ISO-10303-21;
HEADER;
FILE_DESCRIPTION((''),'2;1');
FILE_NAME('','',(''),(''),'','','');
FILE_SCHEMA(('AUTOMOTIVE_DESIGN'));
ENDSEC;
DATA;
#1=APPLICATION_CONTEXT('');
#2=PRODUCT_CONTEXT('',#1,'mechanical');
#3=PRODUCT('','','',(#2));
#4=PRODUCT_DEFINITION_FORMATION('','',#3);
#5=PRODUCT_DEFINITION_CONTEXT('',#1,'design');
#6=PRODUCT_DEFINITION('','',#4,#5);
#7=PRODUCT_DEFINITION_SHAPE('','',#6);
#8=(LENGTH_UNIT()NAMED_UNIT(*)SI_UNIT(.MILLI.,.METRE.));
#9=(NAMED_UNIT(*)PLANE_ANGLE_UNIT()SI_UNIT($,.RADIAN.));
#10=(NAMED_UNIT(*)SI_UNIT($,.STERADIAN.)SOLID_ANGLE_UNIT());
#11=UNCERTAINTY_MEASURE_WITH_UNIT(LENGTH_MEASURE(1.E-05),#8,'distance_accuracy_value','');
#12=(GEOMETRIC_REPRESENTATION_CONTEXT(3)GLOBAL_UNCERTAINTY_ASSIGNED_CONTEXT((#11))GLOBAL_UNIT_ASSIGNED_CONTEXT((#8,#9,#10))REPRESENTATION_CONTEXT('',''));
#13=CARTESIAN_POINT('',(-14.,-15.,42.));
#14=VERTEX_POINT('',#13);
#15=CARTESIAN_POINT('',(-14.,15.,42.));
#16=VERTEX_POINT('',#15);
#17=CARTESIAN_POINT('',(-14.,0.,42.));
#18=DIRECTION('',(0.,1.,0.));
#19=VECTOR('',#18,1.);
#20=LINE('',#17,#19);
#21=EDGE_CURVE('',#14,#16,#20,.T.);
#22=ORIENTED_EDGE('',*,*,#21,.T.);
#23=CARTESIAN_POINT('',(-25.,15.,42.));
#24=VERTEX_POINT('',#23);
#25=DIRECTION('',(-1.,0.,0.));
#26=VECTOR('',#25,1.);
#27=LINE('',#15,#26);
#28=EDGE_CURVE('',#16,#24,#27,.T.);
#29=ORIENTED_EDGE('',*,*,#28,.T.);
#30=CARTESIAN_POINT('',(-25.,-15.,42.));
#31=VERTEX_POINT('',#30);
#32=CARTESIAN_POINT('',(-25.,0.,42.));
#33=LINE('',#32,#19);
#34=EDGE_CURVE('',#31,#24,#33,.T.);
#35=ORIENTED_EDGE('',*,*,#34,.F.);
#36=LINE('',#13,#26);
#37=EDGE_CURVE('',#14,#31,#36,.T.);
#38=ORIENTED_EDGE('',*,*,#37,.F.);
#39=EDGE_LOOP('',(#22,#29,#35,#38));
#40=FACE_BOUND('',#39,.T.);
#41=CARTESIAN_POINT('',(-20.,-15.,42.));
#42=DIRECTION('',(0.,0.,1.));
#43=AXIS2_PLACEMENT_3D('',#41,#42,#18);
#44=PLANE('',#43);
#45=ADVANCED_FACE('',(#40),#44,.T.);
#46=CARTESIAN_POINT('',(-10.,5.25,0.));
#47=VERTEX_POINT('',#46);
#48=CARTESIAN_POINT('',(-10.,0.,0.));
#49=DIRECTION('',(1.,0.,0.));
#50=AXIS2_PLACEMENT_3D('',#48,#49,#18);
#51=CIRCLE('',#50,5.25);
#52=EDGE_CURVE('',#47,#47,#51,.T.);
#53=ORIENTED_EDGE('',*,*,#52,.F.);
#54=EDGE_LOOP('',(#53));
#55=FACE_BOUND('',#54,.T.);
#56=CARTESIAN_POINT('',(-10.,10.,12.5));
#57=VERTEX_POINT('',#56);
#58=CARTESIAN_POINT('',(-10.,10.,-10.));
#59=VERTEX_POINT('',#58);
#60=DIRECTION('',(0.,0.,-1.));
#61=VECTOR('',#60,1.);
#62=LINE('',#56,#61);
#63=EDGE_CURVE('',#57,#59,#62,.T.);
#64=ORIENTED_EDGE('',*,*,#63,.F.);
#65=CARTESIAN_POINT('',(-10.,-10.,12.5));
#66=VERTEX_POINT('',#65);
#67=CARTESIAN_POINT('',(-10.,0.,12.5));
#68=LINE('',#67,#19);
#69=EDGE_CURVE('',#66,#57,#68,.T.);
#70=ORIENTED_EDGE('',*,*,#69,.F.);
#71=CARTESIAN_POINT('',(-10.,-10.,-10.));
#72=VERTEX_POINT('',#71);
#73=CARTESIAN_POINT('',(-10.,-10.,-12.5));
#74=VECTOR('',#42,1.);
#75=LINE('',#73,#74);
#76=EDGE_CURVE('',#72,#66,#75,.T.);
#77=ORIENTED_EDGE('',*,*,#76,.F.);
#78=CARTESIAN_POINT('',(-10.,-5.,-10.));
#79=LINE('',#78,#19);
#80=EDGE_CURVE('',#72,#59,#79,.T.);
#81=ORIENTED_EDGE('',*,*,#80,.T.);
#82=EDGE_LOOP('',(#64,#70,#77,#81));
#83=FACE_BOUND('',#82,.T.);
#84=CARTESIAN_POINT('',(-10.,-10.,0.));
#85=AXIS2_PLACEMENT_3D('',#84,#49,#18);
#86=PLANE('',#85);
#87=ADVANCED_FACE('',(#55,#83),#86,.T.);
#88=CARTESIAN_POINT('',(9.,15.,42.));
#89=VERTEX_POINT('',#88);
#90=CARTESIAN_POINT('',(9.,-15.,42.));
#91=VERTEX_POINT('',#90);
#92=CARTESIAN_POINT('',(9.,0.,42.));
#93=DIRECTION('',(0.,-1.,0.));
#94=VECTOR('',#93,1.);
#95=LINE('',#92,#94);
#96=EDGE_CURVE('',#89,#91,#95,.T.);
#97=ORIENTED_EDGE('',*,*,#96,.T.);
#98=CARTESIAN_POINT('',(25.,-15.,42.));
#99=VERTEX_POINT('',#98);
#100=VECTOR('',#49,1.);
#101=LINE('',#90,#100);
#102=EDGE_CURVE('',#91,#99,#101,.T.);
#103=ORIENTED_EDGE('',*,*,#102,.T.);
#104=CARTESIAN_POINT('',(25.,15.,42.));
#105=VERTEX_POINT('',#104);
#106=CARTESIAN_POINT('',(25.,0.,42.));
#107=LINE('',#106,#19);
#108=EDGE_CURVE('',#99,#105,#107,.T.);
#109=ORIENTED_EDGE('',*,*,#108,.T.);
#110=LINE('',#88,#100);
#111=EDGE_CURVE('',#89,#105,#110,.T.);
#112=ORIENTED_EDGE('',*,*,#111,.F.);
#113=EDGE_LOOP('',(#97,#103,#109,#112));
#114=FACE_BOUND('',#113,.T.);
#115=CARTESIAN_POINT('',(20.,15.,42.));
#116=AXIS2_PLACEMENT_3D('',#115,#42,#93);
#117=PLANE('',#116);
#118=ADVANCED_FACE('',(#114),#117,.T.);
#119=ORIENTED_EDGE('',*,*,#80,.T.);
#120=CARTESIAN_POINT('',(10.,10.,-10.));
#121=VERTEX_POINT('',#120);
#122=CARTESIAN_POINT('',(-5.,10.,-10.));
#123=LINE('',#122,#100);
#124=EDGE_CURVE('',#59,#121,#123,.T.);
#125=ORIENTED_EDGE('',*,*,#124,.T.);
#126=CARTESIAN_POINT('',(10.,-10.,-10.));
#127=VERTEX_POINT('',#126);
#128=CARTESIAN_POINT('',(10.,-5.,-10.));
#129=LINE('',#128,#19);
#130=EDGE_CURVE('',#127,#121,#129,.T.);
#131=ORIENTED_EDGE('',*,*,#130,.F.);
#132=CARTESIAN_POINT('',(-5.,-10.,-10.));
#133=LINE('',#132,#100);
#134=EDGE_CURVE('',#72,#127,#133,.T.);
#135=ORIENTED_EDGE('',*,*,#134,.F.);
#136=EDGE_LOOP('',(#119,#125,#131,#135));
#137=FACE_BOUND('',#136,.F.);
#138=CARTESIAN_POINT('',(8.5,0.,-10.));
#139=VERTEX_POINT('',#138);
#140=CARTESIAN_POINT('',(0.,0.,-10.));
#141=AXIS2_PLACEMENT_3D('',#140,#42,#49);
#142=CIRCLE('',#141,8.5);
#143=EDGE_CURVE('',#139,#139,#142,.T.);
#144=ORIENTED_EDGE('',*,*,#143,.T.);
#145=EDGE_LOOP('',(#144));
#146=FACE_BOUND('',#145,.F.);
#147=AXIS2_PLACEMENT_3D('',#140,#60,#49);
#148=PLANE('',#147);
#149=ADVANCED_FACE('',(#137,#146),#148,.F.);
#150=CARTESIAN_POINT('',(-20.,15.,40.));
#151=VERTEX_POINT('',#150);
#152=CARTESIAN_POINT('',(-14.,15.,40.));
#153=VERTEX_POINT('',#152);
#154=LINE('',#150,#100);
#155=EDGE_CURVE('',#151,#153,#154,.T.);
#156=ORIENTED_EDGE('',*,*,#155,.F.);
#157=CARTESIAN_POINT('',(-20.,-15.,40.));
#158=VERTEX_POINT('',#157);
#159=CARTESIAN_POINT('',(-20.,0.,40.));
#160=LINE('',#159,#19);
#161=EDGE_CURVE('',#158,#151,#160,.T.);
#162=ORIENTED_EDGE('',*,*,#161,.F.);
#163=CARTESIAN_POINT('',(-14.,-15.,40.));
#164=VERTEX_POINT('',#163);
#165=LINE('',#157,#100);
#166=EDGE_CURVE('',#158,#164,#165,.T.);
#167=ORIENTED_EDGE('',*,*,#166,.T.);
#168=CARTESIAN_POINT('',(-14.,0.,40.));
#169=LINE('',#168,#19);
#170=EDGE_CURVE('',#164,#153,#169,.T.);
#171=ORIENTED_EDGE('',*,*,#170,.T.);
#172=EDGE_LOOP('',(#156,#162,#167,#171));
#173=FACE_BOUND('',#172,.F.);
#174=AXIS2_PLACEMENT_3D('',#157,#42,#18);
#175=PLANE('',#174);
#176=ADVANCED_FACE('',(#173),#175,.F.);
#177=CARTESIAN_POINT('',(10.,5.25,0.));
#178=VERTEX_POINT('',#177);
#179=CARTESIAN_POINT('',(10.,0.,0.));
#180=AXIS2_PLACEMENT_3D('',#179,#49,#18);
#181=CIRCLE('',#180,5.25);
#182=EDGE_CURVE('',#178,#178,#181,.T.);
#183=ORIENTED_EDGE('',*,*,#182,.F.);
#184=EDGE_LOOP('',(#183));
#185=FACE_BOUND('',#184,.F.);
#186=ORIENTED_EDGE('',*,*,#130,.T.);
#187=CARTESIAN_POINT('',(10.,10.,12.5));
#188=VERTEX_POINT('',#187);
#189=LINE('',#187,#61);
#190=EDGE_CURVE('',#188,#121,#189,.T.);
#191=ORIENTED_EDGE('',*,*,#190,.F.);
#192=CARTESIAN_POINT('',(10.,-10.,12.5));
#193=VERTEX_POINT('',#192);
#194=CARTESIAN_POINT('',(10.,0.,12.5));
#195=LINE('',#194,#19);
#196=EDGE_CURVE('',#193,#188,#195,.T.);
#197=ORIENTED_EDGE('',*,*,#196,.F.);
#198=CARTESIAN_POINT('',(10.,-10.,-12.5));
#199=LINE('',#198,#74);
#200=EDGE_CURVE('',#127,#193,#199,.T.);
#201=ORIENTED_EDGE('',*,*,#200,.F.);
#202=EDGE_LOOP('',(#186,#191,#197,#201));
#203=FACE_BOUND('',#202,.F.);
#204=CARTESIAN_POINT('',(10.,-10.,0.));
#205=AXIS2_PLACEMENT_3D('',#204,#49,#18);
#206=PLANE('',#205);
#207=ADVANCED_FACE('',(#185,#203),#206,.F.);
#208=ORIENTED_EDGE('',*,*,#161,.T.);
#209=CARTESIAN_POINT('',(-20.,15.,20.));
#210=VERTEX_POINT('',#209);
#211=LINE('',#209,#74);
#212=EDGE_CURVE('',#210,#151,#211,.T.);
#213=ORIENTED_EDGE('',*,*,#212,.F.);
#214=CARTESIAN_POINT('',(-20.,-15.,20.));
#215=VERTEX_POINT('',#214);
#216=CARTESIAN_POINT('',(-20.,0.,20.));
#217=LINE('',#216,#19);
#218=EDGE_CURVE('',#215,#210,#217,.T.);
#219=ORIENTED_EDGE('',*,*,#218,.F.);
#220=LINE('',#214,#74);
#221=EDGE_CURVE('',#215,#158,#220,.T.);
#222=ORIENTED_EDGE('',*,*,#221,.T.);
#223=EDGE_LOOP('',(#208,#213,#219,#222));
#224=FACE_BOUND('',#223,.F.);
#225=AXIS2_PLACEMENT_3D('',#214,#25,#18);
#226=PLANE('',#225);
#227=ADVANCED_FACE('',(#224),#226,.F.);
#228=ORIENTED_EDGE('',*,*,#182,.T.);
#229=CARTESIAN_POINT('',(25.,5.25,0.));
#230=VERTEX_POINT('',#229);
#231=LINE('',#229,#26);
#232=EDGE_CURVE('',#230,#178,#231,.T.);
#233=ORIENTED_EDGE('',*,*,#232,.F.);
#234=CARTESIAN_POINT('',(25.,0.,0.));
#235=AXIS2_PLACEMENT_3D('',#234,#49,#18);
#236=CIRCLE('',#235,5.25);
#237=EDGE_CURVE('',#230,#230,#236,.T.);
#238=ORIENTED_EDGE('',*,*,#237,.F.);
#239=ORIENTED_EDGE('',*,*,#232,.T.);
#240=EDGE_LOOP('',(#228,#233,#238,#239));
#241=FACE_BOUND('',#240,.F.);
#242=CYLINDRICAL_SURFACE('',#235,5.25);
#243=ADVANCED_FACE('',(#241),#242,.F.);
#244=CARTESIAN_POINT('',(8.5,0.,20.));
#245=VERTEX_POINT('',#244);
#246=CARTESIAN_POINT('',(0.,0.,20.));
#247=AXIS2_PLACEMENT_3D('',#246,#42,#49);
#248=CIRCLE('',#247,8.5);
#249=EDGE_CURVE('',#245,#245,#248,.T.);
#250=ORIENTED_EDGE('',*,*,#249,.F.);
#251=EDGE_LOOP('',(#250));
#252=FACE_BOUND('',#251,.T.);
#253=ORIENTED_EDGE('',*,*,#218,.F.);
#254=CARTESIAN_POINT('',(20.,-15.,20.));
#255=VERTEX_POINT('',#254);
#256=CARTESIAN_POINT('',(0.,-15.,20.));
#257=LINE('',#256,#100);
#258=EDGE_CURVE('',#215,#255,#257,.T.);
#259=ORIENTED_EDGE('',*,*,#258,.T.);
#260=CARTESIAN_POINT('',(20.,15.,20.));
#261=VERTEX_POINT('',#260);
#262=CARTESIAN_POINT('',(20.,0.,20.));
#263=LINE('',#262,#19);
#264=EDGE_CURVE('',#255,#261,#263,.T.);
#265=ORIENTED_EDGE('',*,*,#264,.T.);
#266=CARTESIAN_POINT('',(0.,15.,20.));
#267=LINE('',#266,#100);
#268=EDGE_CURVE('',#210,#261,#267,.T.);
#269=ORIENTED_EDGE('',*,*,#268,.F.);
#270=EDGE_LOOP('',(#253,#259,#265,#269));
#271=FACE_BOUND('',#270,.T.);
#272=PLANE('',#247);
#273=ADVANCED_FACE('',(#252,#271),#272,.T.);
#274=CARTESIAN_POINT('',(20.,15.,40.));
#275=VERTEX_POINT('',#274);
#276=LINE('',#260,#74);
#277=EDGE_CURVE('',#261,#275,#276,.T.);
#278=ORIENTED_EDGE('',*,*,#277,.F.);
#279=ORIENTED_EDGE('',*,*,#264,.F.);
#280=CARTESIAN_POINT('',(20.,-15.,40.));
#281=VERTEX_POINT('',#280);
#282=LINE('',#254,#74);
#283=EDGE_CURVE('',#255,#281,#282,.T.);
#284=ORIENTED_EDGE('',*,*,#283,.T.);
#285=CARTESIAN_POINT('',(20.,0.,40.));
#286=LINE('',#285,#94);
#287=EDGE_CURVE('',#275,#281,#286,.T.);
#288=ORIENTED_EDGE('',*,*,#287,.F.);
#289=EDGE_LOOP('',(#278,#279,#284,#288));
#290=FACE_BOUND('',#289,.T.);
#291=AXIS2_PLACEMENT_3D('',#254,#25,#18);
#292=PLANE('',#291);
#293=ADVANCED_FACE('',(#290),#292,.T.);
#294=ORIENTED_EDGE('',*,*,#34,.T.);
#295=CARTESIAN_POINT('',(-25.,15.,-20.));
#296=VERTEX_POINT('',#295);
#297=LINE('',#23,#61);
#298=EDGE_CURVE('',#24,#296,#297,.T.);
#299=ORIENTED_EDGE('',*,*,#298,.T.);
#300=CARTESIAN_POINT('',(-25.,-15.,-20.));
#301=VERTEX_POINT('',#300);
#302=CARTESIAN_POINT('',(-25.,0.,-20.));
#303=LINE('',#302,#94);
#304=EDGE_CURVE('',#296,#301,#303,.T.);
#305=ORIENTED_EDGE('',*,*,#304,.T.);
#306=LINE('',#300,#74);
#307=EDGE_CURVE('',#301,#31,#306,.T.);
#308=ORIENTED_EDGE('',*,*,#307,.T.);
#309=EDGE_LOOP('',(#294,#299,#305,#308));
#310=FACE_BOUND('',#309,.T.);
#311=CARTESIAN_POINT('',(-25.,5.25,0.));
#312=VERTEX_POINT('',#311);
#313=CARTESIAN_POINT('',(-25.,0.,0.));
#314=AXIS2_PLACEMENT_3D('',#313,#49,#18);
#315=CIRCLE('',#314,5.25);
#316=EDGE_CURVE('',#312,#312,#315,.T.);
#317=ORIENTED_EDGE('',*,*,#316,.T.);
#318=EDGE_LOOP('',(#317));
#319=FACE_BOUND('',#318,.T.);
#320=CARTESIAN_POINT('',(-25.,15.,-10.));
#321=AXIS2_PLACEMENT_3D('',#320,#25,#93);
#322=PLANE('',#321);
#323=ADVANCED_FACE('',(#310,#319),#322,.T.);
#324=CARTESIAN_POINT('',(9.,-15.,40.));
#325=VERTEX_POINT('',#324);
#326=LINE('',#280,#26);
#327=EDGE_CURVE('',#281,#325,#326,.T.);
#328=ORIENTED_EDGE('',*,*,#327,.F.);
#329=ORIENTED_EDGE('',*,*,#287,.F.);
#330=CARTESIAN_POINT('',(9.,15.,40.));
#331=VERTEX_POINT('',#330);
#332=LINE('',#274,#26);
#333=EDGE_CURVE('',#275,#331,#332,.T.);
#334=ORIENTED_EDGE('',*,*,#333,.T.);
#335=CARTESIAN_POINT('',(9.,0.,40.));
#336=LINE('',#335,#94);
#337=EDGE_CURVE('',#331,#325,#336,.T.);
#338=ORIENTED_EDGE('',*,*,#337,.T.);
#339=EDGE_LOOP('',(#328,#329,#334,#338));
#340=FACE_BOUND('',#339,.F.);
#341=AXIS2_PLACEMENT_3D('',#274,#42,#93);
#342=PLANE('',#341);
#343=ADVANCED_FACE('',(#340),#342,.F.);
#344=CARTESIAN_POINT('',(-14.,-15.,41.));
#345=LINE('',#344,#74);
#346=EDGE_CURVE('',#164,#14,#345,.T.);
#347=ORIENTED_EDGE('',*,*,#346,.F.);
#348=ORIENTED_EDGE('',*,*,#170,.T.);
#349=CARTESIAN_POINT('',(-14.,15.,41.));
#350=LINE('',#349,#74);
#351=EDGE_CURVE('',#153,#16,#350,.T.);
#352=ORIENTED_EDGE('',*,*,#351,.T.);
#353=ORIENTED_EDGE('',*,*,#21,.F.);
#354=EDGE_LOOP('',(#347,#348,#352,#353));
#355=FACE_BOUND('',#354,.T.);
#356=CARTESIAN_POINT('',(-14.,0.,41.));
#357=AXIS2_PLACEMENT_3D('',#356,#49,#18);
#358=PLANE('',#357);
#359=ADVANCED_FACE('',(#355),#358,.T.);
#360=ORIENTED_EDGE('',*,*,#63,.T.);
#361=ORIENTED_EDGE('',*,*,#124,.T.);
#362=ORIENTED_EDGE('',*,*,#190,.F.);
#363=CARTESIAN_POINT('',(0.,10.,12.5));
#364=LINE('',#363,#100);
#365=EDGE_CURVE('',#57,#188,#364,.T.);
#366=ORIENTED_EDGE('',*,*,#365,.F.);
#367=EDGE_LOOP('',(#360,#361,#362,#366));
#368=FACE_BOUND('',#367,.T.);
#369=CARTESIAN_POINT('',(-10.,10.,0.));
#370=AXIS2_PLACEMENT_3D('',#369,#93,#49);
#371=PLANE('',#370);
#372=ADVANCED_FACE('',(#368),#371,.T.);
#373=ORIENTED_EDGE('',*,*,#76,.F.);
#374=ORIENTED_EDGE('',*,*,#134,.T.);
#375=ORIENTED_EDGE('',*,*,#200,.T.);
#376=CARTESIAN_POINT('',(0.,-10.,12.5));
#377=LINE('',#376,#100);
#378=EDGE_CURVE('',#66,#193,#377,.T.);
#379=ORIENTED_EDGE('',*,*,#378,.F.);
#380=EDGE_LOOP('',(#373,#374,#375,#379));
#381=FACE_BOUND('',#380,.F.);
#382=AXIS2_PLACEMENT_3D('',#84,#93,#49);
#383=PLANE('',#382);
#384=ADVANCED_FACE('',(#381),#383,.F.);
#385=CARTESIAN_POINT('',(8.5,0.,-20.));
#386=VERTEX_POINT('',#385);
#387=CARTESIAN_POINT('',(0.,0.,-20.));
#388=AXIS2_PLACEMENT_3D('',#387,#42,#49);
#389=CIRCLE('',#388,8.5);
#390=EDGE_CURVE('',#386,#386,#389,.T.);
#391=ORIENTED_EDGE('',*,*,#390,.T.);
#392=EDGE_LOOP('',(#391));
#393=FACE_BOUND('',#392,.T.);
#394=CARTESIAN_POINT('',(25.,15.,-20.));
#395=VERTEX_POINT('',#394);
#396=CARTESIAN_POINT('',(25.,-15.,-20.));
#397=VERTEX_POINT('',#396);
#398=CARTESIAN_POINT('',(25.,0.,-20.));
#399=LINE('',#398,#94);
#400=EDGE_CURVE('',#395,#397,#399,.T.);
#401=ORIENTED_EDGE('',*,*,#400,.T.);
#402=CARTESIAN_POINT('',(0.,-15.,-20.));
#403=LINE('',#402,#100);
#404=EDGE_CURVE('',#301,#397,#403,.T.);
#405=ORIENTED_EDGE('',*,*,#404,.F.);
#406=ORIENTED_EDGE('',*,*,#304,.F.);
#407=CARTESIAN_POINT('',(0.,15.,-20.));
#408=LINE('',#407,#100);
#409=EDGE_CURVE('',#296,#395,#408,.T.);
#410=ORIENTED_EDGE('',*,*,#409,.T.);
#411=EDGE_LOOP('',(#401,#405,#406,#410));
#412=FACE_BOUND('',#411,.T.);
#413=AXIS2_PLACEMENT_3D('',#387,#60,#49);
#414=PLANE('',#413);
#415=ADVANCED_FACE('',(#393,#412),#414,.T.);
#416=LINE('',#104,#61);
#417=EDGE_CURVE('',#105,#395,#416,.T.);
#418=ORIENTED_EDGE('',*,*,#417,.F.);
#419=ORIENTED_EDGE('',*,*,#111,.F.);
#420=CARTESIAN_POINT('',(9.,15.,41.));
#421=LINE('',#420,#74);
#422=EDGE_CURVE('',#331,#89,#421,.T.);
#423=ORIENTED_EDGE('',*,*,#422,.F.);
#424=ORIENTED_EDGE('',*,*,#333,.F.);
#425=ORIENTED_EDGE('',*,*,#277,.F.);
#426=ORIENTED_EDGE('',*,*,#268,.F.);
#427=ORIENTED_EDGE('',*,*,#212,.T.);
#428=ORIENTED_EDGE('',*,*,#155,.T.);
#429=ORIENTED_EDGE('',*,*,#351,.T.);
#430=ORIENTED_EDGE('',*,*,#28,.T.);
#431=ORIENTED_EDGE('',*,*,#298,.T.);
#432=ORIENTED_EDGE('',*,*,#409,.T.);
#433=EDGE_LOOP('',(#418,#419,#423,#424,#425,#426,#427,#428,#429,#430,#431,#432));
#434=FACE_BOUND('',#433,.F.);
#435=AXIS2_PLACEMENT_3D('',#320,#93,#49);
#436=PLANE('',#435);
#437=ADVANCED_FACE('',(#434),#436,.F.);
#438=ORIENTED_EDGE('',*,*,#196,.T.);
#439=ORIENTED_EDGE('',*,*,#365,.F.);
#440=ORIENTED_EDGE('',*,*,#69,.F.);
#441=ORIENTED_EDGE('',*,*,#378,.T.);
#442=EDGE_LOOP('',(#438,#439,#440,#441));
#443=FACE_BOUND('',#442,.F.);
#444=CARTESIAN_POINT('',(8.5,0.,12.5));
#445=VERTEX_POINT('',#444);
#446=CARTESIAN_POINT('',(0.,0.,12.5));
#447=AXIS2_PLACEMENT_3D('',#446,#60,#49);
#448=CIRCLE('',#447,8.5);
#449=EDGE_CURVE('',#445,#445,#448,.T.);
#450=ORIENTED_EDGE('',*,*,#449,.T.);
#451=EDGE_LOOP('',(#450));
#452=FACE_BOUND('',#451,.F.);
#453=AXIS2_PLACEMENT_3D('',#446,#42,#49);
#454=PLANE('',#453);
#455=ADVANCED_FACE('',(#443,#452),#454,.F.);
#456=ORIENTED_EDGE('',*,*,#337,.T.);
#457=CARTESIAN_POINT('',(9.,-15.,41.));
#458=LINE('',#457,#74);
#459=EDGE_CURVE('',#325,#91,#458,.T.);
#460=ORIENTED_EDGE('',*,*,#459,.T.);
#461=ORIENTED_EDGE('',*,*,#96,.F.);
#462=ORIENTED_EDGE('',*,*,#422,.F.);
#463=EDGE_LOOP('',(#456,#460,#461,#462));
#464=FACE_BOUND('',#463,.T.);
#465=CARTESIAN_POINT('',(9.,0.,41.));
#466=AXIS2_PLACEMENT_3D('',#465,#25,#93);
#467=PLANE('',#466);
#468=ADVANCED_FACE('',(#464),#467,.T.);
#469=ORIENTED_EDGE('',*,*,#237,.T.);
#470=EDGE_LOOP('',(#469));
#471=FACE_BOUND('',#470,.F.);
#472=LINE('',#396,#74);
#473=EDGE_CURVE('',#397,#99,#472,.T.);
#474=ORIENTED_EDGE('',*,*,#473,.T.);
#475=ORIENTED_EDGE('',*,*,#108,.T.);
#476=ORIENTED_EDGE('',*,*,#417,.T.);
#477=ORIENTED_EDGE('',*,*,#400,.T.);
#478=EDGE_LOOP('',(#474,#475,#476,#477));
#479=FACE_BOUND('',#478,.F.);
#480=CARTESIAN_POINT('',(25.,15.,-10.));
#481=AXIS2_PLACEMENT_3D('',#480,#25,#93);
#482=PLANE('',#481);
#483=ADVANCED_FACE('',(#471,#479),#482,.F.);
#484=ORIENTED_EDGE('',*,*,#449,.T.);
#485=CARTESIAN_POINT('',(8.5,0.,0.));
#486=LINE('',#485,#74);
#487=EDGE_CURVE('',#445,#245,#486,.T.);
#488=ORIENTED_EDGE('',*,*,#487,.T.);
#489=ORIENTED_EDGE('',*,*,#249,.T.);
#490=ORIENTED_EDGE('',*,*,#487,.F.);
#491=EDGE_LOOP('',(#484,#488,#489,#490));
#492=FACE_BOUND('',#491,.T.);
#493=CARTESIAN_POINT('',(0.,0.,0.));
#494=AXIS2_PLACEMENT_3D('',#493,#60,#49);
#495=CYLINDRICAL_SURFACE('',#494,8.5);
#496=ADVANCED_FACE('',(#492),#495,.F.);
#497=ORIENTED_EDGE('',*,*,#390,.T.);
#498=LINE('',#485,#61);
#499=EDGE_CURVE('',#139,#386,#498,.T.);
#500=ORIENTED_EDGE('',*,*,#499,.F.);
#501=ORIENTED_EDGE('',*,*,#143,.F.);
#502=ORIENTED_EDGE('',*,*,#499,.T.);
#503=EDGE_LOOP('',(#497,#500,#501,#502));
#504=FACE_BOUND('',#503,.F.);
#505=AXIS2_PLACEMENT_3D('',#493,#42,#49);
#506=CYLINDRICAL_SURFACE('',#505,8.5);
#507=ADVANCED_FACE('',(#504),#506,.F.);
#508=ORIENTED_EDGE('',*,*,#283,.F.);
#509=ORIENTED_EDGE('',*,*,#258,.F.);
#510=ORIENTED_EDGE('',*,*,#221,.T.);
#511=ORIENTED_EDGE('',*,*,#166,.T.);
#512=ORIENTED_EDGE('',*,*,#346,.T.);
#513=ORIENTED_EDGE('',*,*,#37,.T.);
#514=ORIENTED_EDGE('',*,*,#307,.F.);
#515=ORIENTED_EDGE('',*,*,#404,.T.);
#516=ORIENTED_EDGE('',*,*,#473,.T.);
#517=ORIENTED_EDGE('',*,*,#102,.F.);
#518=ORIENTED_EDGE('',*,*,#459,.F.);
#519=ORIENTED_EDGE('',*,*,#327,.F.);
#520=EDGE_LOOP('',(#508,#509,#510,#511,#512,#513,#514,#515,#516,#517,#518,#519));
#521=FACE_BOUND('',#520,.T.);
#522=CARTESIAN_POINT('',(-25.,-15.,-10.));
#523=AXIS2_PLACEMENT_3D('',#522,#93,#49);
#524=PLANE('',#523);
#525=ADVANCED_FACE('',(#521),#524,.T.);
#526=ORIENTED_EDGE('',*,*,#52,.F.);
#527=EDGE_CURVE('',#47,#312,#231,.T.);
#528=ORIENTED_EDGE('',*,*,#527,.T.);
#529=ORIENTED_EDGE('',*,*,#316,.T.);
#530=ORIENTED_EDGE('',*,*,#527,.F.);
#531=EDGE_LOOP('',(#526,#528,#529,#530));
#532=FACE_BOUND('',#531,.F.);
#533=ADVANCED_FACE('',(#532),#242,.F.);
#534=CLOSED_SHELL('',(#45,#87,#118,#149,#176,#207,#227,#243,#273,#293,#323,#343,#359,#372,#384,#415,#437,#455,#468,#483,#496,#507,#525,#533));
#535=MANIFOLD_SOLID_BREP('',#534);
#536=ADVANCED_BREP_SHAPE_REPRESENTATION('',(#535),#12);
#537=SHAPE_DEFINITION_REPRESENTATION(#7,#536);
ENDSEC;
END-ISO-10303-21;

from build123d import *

# Parameters (mm, degrees)
F2_W      = 50
F2_H      = 30
F3_DEPTH  = 30
F0_R      = 8.5
F4_DEPTH  = 20
F5_W      = 5
F5_H      = 30
F6_DEPTH  = 22
F7_W      = 30
F7_H      = 2
F8_DEPTH  = 6
F9_W      = 30
F9_H      = 2
F10_DEPTH = 11
F11_W     = 20
F11_H     = 20
F12_DEPTH = 12.5
F13_W     = 50
F13_H     = 30
F14_DEPTH = 10
F15_DEPTH = 25
F16_R     = 5.25
F17_DEPTH = 50


with BuildPart() as f3:
    # F2 (on offset) → F3 (new body)
    with BuildSketch(Plane.XY.offset(20)):
        Rectangle(F2_W, F2_H)
    extrude(amount=-F3_DEPTH)

    # F0 (on Top) → F4 (cut)
    with BuildSketch(Plane.XY):
        Circle(F0_R)
    extrude(amount=F4_DEPTH, mode=Mode.SUBTRACT)

    # F5 (on face) → F6 (join)
    with BuildSketch(Plane.XY.offset(20)):
        with Locations((-22.5, 0)):
            Rectangle(F5_W, F5_H)
        with Locations((22.5, 0)):
            Rectangle(F5_W, F5_H)
    extrude(amount=F6_DEPTH)

    # F7 (on face) → F8 (join)
    with BuildSketch(Plane.YZ.offset(-20)):
        with Locations((0, 41)):
            Rectangle(F7_W, F7_H)
    extrude(amount=F8_DEPTH)

    # F9 (on face) → F10 (join)
    with BuildSketch(Plane(origin=(20, 0, 0), x_dir=(0, -1, 0), z_dir=(-1, 0, 0))):
        with Locations((0, 41)):
            Rectangle(F9_W, F9_H)
    extrude(amount=F10_DEPTH)

    # F11 (on Top) → F12 (cut, symmetric)
    with BuildSketch(Plane.XY):
        Rectangle(F11_W, F11_H)
    extrude(amount=F12_DEPTH, both=True, mode=Mode.SUBTRACT)

    # F13 (on face) → F14 (join)
    with BuildSketch(Plane(origin=(0, 0, -10), x_dir=(1, 0, 0), z_dir=(0, 0, -1))):
        Rectangle(F13_W, F13_H)
    extrude(amount=F14_DEPTH)

    # F0 (on Top) → F15 (cut)
    with BuildSketch(Plane.XY):
        Circle(F0_R)
    extrude(amount=-F15_DEPTH, mode=Mode.SUBTRACT)

    # F16 (on face) → F17 (cut)
    with BuildSketch(Plane.YZ.offset(25)):
        Circle(F16_R)
    extrude(amount=-F17_DEPTH, mode=Mode.SUBTRACT)


solid = f3.part
